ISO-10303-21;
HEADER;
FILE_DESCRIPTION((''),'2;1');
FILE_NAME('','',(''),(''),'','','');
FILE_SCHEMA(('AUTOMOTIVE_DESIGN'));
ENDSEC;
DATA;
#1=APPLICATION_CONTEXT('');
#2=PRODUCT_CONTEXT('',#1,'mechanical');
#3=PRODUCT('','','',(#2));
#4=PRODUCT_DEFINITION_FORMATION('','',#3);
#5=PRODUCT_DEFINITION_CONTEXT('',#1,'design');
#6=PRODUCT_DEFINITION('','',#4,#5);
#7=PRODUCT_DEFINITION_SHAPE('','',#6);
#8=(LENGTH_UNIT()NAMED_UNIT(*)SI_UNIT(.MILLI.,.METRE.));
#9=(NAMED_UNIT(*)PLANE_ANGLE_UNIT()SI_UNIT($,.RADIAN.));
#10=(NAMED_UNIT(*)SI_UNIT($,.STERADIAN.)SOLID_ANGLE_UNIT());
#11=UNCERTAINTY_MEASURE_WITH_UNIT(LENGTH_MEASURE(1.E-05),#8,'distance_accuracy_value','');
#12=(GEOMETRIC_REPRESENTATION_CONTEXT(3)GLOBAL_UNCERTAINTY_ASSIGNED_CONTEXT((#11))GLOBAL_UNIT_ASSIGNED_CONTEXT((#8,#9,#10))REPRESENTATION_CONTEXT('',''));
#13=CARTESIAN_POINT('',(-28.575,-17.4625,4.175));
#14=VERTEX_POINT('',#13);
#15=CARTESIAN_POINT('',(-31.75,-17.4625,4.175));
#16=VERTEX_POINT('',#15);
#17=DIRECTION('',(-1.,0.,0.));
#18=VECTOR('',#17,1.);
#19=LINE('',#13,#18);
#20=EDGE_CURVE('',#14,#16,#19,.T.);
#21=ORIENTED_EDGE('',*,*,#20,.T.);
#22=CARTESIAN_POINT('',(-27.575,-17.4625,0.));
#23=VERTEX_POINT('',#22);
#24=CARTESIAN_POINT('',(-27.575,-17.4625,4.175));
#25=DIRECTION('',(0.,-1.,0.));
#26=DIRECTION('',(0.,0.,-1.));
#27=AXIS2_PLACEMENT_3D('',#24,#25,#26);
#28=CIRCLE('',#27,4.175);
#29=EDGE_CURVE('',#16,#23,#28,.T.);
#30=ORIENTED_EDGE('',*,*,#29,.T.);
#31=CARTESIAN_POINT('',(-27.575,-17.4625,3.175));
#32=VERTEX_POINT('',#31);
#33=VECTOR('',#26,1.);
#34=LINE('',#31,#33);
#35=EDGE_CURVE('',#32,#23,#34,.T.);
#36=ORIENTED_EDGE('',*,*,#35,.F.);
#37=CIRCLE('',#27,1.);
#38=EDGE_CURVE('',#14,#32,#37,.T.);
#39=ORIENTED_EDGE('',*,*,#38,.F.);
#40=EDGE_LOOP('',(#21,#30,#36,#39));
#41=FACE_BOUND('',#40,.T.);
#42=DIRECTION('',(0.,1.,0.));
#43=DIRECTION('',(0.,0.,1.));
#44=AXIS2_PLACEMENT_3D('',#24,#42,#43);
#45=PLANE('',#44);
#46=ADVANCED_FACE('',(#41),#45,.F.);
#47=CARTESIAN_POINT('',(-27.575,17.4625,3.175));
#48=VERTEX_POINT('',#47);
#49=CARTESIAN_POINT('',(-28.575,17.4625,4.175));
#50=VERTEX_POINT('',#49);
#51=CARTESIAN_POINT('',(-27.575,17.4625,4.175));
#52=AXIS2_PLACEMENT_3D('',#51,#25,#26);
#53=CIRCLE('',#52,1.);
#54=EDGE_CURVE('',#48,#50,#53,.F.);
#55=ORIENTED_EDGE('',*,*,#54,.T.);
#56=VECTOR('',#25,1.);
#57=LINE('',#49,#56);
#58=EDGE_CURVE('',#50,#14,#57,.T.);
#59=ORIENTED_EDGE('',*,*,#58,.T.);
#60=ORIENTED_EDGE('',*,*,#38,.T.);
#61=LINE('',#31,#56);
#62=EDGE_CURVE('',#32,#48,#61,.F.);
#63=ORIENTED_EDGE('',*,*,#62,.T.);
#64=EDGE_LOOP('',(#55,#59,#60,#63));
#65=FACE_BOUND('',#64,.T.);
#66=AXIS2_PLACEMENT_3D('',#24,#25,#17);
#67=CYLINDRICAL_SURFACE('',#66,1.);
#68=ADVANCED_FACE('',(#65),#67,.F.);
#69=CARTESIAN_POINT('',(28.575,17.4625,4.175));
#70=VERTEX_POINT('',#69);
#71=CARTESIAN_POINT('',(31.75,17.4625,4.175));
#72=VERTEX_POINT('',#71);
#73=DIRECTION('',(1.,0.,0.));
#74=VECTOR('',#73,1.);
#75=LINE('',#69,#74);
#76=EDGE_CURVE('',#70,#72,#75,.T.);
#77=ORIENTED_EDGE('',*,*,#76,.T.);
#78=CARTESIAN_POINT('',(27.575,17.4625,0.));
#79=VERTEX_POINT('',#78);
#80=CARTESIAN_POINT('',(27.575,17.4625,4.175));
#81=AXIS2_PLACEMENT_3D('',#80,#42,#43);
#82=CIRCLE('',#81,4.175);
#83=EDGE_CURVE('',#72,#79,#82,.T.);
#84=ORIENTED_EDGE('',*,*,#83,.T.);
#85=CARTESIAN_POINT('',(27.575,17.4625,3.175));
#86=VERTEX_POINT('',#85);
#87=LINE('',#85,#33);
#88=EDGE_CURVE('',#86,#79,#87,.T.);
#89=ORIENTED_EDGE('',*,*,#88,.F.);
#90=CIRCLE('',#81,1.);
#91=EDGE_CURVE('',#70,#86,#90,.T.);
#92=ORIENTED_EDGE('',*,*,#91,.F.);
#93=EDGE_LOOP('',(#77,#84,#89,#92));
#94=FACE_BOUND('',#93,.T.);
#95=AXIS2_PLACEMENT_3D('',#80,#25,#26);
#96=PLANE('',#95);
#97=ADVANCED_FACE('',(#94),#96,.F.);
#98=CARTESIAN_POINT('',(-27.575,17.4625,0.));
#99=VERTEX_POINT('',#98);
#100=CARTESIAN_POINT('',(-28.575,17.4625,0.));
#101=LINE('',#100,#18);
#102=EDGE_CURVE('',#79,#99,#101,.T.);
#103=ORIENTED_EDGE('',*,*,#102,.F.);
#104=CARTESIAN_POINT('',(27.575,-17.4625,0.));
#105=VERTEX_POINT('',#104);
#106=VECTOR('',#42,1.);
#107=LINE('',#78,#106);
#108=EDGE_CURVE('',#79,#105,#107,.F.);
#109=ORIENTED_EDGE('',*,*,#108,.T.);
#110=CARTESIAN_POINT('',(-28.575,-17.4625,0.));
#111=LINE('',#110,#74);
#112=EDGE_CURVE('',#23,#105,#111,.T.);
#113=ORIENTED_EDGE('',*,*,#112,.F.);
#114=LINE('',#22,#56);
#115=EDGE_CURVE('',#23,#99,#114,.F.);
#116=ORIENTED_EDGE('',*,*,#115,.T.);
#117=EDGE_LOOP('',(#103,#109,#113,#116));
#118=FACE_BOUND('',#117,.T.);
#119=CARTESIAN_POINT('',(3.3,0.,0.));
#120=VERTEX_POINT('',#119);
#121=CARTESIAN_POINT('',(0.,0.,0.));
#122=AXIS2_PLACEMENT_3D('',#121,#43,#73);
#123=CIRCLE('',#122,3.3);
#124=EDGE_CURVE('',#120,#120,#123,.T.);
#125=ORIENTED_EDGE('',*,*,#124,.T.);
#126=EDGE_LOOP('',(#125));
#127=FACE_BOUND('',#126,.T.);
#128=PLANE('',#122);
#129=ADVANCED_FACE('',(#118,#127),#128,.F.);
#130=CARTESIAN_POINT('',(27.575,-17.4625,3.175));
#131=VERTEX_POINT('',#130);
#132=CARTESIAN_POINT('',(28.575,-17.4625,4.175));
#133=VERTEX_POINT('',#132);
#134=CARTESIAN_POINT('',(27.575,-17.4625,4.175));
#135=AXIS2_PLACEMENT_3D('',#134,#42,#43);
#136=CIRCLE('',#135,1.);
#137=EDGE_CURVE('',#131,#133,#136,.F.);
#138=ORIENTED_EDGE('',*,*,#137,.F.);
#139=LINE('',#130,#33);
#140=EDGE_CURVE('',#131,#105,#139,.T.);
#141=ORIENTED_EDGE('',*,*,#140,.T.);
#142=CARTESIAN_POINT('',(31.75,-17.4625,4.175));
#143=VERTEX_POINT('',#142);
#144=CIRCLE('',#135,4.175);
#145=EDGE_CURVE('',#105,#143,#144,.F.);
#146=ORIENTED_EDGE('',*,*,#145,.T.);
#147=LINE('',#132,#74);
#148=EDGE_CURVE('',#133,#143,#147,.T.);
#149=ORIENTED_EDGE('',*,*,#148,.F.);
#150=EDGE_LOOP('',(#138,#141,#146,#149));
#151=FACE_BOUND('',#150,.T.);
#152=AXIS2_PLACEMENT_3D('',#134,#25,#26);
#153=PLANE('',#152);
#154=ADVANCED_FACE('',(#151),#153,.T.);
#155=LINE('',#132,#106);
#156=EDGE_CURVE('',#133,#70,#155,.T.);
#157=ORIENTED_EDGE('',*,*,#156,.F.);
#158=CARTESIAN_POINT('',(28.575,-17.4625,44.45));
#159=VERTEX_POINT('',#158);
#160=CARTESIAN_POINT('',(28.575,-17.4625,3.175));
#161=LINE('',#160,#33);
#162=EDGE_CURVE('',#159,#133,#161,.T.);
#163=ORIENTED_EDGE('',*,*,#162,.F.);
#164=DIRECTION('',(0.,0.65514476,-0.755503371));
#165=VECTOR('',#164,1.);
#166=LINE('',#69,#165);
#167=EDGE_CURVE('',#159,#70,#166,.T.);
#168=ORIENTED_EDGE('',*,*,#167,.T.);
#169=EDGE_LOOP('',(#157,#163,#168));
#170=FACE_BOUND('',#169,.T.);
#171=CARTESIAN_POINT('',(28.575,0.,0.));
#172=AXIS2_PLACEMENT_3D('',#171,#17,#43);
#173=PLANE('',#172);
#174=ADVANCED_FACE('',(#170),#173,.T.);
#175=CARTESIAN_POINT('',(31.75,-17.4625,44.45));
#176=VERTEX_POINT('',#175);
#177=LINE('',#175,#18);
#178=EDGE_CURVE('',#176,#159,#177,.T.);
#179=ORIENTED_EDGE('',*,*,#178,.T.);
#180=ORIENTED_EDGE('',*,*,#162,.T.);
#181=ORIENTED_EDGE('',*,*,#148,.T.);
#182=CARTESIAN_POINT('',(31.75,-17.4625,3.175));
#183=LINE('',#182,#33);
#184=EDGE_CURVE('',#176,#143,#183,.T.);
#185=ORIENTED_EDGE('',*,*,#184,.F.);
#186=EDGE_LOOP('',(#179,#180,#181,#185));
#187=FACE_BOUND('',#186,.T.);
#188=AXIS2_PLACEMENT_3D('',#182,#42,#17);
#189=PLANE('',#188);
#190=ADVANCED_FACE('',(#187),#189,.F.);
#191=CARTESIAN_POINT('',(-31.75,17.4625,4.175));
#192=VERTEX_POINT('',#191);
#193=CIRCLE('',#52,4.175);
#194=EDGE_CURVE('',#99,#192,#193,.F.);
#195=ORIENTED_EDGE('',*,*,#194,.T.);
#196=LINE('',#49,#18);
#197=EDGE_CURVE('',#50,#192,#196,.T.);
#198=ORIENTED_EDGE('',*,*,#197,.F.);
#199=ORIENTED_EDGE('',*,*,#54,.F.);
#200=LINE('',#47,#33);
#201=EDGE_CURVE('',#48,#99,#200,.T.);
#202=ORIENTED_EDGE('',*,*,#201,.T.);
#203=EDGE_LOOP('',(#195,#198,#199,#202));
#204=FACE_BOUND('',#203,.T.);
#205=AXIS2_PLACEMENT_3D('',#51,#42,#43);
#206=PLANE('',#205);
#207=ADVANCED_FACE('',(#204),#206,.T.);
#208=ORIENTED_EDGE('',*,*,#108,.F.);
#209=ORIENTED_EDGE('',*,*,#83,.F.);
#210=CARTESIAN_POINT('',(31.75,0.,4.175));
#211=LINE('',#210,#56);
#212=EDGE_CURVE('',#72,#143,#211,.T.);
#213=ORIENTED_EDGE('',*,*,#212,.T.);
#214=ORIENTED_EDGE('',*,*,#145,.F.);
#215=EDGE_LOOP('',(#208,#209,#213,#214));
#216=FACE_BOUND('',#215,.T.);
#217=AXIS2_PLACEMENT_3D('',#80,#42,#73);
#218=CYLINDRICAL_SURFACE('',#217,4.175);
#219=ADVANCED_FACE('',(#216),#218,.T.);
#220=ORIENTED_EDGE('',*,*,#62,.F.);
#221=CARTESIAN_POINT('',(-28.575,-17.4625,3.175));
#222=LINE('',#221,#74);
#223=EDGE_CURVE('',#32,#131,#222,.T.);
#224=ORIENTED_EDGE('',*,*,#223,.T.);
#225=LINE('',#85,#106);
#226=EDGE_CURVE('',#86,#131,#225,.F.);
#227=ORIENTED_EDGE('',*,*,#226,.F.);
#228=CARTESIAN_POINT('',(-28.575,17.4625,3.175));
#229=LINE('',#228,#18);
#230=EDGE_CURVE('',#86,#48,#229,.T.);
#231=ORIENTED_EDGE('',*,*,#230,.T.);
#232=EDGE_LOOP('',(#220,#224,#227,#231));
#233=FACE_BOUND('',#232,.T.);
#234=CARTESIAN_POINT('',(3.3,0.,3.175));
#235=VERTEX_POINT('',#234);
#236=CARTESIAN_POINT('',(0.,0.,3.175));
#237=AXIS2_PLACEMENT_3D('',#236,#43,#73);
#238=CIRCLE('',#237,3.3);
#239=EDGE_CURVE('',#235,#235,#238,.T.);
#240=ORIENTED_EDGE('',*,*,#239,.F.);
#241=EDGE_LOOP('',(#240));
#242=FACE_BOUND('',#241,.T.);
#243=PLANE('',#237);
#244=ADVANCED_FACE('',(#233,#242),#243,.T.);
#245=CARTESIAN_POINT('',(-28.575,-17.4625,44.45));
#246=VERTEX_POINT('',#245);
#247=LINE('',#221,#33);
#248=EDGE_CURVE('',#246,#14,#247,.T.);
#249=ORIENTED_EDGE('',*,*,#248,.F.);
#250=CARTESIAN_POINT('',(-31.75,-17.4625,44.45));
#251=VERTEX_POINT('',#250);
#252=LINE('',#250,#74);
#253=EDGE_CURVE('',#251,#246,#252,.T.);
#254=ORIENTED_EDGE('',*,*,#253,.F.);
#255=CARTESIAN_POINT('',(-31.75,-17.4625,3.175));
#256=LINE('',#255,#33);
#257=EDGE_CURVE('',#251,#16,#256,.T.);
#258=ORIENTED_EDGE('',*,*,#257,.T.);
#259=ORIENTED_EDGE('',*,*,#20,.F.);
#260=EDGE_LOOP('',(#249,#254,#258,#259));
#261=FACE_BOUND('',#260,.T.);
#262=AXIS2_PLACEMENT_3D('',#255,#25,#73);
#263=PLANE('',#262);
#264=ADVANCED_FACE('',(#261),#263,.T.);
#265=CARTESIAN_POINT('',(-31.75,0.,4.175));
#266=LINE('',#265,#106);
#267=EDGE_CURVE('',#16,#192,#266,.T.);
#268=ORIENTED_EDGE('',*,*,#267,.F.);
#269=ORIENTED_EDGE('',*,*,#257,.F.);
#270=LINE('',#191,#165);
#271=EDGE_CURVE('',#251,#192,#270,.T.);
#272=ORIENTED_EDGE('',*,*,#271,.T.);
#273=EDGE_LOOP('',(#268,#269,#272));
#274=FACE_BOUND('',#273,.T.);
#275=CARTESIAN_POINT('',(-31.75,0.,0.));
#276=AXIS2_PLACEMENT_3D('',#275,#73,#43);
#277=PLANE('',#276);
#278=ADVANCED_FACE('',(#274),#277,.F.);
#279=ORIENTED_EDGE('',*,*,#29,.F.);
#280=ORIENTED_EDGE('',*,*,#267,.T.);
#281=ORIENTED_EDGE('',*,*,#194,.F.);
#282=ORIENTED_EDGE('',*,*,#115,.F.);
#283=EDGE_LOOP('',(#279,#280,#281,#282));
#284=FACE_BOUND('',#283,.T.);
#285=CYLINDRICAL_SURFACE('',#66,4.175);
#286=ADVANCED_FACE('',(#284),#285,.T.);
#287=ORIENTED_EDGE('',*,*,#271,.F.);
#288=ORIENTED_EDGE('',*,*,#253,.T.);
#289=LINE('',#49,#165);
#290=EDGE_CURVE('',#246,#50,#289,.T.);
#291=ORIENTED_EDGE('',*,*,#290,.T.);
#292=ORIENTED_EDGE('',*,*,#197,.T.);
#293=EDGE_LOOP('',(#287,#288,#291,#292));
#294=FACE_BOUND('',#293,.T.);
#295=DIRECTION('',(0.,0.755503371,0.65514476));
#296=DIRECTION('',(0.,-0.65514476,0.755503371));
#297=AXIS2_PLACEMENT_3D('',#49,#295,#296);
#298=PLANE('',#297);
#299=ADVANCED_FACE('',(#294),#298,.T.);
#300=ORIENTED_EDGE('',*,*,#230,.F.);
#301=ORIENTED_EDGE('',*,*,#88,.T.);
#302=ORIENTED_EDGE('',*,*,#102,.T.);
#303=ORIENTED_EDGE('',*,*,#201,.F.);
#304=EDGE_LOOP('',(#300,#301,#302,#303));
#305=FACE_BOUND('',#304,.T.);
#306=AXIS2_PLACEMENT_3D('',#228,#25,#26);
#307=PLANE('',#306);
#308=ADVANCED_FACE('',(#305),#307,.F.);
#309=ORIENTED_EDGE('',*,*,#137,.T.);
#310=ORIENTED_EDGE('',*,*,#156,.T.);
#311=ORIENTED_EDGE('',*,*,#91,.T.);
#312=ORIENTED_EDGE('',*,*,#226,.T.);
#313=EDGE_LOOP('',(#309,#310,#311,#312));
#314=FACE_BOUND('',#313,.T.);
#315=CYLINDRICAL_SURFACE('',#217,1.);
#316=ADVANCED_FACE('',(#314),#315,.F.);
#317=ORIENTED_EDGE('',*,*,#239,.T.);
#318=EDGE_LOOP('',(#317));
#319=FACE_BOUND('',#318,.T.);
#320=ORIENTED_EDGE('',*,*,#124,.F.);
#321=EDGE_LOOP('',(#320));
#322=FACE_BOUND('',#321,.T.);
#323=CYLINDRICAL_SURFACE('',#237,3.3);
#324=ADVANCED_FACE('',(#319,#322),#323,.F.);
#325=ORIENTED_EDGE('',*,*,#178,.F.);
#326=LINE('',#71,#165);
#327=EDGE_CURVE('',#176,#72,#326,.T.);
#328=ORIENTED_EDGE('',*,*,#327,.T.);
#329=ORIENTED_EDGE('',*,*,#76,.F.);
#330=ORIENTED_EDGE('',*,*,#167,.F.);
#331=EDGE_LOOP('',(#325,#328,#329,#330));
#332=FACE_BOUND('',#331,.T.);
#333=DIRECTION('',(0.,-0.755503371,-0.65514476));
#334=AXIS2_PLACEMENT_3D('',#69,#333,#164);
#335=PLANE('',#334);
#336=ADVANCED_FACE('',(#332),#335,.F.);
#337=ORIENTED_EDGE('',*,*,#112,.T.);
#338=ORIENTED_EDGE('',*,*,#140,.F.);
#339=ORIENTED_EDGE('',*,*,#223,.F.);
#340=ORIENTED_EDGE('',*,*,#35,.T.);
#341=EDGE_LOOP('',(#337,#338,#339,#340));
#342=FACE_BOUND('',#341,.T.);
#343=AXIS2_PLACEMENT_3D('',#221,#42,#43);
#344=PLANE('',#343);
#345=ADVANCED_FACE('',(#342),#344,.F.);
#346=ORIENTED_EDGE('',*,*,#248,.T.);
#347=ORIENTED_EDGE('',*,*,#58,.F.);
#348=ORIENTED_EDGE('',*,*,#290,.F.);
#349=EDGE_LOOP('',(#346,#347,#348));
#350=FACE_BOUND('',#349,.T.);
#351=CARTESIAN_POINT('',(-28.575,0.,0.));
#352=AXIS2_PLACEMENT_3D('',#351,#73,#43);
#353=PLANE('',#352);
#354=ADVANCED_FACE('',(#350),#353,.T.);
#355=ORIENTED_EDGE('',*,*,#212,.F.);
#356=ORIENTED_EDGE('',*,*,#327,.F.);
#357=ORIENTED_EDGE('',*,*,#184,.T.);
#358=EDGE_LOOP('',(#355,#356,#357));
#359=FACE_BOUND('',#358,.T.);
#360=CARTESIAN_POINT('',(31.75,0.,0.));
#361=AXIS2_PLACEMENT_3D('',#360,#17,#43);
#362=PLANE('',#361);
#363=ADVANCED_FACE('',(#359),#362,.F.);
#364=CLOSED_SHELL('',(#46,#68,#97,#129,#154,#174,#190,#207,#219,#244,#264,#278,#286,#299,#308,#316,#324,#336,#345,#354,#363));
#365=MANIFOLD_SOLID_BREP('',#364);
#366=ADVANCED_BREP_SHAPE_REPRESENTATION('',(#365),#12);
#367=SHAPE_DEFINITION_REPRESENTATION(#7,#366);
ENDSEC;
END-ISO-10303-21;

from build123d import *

# Parameters (mm, degrees)
SKETCH2_W                    = 57.15
SKETCH2_H                    = 34.925
BASE_FLANGE1_DEPTH           = 3.175
EDGE_FLANGE1_STRIP_W         = 14.7
EDGE_FLANGE1_STRIP_H         = 3.175
EDGE_FLANGE1_STRIP_CUT_DEPTH = 34.925
EDGE_FLANGE1_DEPTH           = 34.925
CUT_EXTRUDE1_DEPTH           = 3.175
M6_CLEARANCE_HOLE1_D         = 6.6


# Sheet-metal steps are written as plain solids
with BuildPart() as part:
    # Sketch2 → Base-Flange1 (new body)
    with BuildSketch(Plane.XY):
        Rectangle(SKETCH2_W, SKETCH2_H)
    extrude(amount=BASE_FLANGE1_DEPTH)

    # Edge-Flange1 strip (across the edge) → Edge-Flange1 strip cut (cut)
    with BuildSketch(Plane(origin=(28.575, -17.4625, 3.175), x_dir=(-1, 0, 0), z_dir=(0, 1, 0))):
        with Locations((-6.35, -1.5875)):
            Rectangle(EDGE_FLANGE1_STRIP_W, EDGE_FLANGE1_STRIP_H)
    edge_flange1_strip_cut = extrude(amount=EDGE_FLANGE1_STRIP_CUT_DEPTH, mode=Mode.SUBTRACT)

    # Edge-Flange1 section (across the edge) → Edge-Flange1 (add)
    with BuildSketch(Plane(origin=(28.575, -17.4625, 3.175), x_dir=(-1, 0, 0), z_dir=(0, 1, 0))):
        with BuildLine():
            Line((-3.175, 1), (-3.175, 41.275))
            Line((-3.175, 41.275), (0, 41.275))
            Line((0, 41.275), (0, 1))
            ThreePointArc((0, 1), (0.292893219, 0.292893219), (1, 0))
            Line((1, 0), (1, -3.175))
            ThreePointArc((1, -3.175), (-1.952170811, -1.952170811), (-3.175, 1))
        make_face()
    edge_flange1 = extrude(amount=EDGE_FLANGE1_DEPTH)

    # Sketch10 → Cut-Extrude1 (cut)
    with BuildSketch(Plane(origin=(31.75, 0, 0), x_dir=(0, 0, -1), z_dir=(1, 0, 0))):
        Polygon((-4.175, 17.4625), (-44.45, -17.4625), (-44.45, 17.4625), align=None)
    cut_extrude1 = extrude(amount=-CUT_EXTRUDE1_DEPTH, mode=Mode.SUBTRACT)

    # Mirror1: Edge-Flange1 strip cut, Edge-Flange1, Cut-Extrude1 across plane
    add(edge_flange1_strip_cut.mirror(Plane(origin=(0, 0, 0), x_dir=(0, 0, 1), z_dir=(1, 0, 0))), mode=Mode.SUBTRACT)
    add(edge_flange1.mirror(Plane(origin=(0, 0, 0), x_dir=(0, 0, 1), z_dir=(1, 0, 0))))
    add(cut_extrude1.mirror(Plane(origin=(0, 0, 0), x_dir=(0, 0, 1), z_dir=(1, 0, 0))), mode=Mode.SUBTRACT)

    # M6 Clearance Hole1 (through all)
    with Locations(Plane.XY.offset(3.175)):
        with Locations((0, 0)):
            Hole(M6_CLEARANCE_HOLE1_D / 2)


solid = part.part
